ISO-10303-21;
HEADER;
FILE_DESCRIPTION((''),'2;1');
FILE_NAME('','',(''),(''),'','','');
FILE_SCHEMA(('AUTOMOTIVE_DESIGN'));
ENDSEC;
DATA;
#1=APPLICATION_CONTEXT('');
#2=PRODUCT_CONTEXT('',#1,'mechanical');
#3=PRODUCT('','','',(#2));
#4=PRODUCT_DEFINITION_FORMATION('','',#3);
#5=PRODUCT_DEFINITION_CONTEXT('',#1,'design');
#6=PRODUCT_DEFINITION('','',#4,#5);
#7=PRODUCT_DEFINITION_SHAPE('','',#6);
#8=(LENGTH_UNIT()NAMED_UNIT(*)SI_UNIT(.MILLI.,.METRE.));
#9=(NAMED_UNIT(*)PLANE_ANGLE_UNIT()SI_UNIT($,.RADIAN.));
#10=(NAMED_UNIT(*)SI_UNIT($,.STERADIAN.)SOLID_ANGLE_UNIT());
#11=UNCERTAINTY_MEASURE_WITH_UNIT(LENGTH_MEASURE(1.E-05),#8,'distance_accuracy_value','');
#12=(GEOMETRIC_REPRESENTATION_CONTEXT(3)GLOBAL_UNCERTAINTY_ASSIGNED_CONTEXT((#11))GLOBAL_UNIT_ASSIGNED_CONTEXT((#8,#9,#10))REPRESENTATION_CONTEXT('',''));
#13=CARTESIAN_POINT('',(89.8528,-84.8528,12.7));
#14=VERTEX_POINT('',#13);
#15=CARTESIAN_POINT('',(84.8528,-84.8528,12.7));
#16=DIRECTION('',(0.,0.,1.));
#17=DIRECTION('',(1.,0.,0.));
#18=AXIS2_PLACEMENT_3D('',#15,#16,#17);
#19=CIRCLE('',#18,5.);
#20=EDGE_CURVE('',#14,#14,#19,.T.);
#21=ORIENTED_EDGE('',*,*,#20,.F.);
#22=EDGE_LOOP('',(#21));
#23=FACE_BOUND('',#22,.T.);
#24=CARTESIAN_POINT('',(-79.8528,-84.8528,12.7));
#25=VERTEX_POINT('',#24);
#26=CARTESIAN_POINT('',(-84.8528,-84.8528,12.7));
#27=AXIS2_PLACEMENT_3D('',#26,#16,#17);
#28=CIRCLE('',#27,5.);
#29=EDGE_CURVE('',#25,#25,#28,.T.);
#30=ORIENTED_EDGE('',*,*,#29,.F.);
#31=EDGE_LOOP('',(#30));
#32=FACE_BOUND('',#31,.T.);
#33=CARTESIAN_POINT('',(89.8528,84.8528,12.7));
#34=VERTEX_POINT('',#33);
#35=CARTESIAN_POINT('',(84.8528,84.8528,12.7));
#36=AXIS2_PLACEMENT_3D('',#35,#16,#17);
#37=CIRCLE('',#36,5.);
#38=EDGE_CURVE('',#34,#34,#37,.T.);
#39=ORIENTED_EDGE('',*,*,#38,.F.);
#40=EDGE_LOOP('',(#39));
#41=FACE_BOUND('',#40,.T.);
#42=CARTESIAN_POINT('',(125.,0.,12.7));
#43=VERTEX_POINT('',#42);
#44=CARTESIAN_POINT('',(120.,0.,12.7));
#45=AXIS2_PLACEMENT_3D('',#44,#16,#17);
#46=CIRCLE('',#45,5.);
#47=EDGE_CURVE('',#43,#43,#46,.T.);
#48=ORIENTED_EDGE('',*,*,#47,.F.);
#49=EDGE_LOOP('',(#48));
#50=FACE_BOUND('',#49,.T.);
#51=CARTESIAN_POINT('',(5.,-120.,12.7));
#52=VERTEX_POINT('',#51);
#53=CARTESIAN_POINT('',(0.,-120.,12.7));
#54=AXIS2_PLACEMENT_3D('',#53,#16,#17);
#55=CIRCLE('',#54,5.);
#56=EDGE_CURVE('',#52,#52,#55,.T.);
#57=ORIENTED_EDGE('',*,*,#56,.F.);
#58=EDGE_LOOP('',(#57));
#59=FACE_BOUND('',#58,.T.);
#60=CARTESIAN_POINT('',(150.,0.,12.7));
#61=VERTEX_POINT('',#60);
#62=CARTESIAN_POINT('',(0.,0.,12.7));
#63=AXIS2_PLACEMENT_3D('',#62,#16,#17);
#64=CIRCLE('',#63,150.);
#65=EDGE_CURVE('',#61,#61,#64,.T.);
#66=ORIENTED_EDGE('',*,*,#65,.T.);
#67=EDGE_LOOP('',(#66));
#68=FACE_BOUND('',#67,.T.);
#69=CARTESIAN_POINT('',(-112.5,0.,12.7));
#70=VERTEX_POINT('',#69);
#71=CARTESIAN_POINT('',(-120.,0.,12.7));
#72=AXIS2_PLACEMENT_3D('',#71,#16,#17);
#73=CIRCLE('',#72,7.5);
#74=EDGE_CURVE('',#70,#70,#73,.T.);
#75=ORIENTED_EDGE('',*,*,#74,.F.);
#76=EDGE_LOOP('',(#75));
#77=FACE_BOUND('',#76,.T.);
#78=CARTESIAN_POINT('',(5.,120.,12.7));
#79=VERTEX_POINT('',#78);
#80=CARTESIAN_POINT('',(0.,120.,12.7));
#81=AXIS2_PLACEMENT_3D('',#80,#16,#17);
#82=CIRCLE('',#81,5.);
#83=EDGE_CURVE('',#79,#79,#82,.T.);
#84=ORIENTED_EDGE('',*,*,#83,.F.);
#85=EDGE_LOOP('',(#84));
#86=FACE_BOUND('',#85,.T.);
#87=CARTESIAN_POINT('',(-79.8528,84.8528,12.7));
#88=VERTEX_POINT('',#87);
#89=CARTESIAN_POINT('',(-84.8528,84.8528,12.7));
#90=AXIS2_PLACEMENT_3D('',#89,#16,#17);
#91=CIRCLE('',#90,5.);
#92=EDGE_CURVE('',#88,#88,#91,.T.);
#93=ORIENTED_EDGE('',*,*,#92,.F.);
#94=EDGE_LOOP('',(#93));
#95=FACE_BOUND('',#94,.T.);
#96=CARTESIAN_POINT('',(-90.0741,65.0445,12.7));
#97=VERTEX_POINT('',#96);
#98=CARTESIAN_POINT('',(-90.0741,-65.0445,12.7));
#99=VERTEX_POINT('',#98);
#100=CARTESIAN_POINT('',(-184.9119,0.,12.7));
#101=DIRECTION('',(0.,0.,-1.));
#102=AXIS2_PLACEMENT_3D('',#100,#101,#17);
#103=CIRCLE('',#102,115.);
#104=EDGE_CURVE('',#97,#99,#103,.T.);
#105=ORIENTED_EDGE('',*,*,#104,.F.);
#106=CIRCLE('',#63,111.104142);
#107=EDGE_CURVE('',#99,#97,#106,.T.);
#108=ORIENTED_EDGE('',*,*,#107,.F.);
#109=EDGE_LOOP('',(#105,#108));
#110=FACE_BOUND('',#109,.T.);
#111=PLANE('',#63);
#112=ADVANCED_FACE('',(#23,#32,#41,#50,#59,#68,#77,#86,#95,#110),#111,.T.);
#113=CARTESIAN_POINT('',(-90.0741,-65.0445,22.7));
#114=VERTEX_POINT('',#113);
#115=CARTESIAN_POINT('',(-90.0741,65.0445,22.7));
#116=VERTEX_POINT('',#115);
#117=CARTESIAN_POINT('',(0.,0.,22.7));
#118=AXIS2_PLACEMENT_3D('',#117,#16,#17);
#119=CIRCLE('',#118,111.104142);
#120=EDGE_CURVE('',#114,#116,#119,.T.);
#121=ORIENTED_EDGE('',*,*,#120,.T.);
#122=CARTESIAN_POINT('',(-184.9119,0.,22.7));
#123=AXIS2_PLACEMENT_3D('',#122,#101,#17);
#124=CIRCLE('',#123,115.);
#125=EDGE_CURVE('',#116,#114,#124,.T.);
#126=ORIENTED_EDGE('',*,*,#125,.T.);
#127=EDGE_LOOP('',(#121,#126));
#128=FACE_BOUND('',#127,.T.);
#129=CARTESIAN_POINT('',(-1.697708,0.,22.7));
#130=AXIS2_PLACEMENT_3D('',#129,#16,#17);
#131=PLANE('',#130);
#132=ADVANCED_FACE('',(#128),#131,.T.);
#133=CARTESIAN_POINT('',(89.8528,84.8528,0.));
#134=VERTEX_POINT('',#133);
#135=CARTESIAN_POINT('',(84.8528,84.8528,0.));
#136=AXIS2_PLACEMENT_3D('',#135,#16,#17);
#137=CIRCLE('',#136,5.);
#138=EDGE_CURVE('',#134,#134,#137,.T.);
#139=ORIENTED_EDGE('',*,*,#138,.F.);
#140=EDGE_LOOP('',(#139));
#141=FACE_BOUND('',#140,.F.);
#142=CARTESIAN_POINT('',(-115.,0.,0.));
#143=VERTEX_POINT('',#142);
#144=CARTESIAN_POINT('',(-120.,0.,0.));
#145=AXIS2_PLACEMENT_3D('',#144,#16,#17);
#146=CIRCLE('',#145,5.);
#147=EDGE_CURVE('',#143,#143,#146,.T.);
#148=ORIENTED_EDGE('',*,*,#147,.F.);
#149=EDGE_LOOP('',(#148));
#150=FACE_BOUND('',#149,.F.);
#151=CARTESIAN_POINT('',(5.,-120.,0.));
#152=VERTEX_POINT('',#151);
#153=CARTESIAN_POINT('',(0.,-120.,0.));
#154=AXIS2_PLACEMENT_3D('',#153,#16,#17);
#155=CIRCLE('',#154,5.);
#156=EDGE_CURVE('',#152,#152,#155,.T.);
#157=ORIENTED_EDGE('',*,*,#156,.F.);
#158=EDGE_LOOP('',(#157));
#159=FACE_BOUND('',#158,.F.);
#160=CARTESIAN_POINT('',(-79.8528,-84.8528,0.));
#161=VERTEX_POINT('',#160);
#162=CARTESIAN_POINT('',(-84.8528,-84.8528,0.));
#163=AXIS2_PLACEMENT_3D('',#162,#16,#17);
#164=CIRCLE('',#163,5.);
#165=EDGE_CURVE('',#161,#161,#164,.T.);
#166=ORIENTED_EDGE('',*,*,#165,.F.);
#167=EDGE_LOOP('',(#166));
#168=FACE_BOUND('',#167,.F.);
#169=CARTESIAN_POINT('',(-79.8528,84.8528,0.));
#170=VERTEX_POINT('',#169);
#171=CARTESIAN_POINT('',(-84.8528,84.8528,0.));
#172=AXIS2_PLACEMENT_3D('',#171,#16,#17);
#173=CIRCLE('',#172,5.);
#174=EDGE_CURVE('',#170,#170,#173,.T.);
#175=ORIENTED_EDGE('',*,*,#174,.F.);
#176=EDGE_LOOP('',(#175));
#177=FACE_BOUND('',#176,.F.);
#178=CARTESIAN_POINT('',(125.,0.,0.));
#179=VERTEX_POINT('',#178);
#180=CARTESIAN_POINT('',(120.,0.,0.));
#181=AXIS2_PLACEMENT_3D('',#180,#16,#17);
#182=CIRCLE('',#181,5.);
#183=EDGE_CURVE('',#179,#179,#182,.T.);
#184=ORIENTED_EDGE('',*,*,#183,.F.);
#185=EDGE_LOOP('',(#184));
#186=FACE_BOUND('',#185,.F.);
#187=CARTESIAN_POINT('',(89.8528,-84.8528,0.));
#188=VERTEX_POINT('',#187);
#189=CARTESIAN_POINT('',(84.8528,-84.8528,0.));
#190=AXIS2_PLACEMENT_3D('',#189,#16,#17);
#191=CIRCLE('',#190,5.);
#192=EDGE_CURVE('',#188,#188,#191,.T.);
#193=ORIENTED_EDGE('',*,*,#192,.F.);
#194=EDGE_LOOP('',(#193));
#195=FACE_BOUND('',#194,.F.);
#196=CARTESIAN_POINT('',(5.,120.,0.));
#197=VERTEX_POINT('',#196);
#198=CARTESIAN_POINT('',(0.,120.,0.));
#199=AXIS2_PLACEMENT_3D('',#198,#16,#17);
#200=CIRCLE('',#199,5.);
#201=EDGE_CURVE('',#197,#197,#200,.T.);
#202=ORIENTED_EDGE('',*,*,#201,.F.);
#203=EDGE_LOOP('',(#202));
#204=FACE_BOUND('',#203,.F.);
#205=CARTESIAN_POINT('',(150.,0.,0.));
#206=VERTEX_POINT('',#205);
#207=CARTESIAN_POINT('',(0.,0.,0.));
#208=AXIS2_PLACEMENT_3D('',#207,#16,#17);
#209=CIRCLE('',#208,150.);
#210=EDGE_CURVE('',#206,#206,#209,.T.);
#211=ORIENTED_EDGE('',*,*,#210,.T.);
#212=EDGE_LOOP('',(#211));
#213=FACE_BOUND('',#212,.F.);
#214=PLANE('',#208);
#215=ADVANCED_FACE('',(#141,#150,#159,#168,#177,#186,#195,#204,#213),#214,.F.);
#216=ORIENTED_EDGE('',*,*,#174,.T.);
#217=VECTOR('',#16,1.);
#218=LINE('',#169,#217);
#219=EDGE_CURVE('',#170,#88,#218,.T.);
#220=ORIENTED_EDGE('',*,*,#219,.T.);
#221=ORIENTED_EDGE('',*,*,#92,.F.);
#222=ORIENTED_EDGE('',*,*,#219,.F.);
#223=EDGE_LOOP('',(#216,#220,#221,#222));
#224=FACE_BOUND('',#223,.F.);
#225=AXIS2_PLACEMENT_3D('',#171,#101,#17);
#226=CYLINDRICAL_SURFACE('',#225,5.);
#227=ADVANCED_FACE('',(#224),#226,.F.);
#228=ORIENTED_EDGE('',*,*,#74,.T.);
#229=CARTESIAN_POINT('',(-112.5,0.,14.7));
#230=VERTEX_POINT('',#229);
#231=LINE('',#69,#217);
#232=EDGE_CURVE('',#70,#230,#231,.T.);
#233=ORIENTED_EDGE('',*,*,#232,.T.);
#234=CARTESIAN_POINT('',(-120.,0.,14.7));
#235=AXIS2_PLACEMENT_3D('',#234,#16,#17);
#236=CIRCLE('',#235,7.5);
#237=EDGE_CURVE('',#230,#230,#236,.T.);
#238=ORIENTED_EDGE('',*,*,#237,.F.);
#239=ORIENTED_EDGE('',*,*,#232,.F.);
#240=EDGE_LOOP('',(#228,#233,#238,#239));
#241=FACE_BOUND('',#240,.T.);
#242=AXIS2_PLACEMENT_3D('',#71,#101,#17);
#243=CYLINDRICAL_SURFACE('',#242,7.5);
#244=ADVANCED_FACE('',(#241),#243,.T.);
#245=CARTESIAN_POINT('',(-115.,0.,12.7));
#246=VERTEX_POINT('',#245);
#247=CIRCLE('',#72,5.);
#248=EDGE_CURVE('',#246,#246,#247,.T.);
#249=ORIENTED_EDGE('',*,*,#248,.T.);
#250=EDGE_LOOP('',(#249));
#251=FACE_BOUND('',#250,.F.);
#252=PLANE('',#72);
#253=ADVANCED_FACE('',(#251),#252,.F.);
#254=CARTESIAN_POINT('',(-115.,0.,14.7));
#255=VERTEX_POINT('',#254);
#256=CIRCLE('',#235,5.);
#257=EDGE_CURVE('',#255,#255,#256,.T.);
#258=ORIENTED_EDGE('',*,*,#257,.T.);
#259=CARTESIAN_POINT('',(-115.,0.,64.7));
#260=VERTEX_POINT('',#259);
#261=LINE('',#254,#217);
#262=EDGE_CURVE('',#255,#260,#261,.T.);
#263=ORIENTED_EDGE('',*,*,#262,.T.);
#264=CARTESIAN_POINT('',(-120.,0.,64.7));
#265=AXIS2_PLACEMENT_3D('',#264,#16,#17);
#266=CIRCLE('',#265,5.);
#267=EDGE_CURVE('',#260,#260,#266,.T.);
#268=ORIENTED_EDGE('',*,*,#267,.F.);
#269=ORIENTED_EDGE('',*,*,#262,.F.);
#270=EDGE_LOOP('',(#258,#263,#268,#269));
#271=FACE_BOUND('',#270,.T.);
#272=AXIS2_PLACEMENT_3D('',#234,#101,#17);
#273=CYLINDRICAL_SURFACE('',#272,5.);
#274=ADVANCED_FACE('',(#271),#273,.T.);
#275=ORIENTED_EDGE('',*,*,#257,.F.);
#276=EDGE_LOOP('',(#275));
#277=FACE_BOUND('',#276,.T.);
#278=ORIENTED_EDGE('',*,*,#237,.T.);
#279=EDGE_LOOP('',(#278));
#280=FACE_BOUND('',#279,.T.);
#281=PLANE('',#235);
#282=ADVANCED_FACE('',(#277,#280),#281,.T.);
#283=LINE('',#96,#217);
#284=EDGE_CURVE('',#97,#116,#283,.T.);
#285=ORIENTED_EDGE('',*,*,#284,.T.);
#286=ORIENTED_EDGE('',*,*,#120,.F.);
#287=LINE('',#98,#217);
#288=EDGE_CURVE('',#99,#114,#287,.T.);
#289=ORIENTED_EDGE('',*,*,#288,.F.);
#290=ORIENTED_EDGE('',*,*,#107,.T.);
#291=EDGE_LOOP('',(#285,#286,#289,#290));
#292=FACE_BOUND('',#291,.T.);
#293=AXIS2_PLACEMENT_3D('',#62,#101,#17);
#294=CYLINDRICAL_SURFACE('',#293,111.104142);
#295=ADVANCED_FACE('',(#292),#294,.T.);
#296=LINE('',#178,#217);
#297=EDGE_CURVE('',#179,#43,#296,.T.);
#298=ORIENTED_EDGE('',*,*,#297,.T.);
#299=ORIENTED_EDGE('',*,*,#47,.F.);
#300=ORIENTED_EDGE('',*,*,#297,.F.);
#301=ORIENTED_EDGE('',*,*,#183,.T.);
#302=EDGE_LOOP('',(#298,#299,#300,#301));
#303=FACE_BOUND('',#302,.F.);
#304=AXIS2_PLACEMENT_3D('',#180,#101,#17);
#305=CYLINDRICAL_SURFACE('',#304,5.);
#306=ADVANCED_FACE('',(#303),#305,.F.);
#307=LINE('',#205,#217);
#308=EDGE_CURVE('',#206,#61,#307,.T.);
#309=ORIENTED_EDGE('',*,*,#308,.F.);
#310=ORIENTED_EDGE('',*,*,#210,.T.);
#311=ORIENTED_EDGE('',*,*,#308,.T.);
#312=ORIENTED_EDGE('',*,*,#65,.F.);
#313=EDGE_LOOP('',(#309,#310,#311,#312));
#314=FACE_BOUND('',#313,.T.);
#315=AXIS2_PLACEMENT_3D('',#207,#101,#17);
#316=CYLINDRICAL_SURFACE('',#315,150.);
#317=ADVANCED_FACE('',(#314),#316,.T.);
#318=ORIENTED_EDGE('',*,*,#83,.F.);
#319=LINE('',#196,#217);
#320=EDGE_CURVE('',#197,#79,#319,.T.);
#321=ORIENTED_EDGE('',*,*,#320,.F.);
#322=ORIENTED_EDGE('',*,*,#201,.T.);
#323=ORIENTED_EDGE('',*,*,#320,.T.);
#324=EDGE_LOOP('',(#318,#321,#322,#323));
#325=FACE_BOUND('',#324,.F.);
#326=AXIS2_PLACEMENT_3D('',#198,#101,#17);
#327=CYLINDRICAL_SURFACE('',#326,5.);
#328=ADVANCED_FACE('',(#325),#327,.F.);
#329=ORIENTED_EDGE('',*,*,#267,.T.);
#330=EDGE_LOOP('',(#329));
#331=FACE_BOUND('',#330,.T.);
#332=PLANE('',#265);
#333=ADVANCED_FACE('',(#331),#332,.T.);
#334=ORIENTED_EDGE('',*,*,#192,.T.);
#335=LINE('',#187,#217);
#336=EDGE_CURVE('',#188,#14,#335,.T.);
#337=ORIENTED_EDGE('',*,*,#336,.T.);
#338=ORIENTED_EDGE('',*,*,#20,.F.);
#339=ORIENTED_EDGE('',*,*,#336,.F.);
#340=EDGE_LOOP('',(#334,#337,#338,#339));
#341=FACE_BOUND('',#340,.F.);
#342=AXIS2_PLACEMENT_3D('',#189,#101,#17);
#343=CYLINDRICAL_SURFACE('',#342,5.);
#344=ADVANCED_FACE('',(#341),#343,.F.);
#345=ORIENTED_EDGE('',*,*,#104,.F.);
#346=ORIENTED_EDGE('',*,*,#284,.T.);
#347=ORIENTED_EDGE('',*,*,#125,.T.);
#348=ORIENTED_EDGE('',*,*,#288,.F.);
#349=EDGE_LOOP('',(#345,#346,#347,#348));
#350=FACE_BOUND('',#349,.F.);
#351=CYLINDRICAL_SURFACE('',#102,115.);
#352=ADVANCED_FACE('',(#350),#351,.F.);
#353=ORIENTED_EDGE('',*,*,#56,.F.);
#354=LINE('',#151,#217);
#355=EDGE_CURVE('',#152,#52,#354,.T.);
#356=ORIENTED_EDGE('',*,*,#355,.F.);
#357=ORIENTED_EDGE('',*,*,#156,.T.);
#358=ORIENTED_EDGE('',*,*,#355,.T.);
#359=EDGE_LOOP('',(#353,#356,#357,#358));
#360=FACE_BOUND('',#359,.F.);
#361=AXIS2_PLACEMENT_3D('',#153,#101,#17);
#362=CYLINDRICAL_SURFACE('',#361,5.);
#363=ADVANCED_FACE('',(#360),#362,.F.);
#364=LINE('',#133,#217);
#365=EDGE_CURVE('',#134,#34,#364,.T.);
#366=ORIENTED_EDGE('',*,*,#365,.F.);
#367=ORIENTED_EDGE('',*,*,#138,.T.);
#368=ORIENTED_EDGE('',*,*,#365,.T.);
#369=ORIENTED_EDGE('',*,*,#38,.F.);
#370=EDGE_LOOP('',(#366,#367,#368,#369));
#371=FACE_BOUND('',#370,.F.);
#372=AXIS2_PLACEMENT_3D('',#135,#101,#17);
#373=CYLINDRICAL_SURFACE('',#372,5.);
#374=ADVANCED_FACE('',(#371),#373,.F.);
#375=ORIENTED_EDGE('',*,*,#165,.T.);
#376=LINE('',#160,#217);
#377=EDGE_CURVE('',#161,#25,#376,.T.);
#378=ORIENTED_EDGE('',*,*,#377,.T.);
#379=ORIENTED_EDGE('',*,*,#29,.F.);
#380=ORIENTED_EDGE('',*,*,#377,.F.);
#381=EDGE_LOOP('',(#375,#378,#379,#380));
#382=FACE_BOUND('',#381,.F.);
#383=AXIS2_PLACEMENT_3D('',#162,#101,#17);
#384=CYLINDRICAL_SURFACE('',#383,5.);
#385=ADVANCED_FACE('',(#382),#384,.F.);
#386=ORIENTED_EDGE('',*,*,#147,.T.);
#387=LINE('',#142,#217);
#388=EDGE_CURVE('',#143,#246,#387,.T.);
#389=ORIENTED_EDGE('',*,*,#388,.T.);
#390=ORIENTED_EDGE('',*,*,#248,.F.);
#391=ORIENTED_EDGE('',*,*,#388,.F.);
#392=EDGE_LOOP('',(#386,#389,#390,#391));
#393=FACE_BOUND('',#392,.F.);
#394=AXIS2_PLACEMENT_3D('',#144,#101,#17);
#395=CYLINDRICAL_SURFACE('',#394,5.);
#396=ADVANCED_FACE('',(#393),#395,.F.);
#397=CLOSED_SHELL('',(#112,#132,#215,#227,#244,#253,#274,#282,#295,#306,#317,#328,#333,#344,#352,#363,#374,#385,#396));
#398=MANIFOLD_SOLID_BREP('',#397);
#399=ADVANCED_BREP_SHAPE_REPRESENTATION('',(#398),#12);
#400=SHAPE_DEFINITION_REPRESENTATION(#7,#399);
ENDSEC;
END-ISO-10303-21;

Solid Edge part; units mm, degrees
sketch "Sketch1" plane through (0, 0, 0) normal (0, 0, 1) x (1, 0, 0)
  circle A0 centre (-120, 0) radius 5
  circle A1 centre (84.8528, 84.8528) radius 5
  circle A2 centre (-84.8528, -84.8528) radius 5
  circle A3 centre (0, -120) radius 5
  circle A4 centre (84.8528, -84.8528) radius 5
  circle A5 centre (120, 0) radius 5
  circle A6 centre (0, 120) radius 5
  circle A7 centre (-84.8528, 84.8528) radius 5
  circle A8 centre (0, 0) radius 150
  dimension "D1" = 120
extrude "Protrusion1" add sketch "Sketch1" along normal blind 12.7
sketch "Sketch2" plane through (0, 0, 12.7) normal (0, 0, 1) x (1, 0, 0)
  arc A0 (-90.0741, -65.0445) -> (-90.0741, 65.0445) centre (0, 0) ccw
  arc A1 (-90.0741, 65.0445) -> (-90.0741, -65.0445) centre (-184.9119, 0) cw
extrude "ProtrusiónExtruida_2" add sketch "Sketch2" along normal blind 10
sketch "Sketch3" plane through (-109.956, 0, 12.7) normal (0, 0, 1) x (1, 0, 0)
  circle A0 centre (-10.044, 0) radius 7.5
extrude "ProtrusiónExtruida_3" add sketch "Sketch3" along normal blind 2
sketch "Sketch4" plane through (-120, 0, 14.7) normal (0, 0, 1) x (1, 0, 0)
  circle A0 centre (0, 0) radius 5
extrude "ProtrusiónExtruida_4" add sketch "Sketch4" along normal blind 50
